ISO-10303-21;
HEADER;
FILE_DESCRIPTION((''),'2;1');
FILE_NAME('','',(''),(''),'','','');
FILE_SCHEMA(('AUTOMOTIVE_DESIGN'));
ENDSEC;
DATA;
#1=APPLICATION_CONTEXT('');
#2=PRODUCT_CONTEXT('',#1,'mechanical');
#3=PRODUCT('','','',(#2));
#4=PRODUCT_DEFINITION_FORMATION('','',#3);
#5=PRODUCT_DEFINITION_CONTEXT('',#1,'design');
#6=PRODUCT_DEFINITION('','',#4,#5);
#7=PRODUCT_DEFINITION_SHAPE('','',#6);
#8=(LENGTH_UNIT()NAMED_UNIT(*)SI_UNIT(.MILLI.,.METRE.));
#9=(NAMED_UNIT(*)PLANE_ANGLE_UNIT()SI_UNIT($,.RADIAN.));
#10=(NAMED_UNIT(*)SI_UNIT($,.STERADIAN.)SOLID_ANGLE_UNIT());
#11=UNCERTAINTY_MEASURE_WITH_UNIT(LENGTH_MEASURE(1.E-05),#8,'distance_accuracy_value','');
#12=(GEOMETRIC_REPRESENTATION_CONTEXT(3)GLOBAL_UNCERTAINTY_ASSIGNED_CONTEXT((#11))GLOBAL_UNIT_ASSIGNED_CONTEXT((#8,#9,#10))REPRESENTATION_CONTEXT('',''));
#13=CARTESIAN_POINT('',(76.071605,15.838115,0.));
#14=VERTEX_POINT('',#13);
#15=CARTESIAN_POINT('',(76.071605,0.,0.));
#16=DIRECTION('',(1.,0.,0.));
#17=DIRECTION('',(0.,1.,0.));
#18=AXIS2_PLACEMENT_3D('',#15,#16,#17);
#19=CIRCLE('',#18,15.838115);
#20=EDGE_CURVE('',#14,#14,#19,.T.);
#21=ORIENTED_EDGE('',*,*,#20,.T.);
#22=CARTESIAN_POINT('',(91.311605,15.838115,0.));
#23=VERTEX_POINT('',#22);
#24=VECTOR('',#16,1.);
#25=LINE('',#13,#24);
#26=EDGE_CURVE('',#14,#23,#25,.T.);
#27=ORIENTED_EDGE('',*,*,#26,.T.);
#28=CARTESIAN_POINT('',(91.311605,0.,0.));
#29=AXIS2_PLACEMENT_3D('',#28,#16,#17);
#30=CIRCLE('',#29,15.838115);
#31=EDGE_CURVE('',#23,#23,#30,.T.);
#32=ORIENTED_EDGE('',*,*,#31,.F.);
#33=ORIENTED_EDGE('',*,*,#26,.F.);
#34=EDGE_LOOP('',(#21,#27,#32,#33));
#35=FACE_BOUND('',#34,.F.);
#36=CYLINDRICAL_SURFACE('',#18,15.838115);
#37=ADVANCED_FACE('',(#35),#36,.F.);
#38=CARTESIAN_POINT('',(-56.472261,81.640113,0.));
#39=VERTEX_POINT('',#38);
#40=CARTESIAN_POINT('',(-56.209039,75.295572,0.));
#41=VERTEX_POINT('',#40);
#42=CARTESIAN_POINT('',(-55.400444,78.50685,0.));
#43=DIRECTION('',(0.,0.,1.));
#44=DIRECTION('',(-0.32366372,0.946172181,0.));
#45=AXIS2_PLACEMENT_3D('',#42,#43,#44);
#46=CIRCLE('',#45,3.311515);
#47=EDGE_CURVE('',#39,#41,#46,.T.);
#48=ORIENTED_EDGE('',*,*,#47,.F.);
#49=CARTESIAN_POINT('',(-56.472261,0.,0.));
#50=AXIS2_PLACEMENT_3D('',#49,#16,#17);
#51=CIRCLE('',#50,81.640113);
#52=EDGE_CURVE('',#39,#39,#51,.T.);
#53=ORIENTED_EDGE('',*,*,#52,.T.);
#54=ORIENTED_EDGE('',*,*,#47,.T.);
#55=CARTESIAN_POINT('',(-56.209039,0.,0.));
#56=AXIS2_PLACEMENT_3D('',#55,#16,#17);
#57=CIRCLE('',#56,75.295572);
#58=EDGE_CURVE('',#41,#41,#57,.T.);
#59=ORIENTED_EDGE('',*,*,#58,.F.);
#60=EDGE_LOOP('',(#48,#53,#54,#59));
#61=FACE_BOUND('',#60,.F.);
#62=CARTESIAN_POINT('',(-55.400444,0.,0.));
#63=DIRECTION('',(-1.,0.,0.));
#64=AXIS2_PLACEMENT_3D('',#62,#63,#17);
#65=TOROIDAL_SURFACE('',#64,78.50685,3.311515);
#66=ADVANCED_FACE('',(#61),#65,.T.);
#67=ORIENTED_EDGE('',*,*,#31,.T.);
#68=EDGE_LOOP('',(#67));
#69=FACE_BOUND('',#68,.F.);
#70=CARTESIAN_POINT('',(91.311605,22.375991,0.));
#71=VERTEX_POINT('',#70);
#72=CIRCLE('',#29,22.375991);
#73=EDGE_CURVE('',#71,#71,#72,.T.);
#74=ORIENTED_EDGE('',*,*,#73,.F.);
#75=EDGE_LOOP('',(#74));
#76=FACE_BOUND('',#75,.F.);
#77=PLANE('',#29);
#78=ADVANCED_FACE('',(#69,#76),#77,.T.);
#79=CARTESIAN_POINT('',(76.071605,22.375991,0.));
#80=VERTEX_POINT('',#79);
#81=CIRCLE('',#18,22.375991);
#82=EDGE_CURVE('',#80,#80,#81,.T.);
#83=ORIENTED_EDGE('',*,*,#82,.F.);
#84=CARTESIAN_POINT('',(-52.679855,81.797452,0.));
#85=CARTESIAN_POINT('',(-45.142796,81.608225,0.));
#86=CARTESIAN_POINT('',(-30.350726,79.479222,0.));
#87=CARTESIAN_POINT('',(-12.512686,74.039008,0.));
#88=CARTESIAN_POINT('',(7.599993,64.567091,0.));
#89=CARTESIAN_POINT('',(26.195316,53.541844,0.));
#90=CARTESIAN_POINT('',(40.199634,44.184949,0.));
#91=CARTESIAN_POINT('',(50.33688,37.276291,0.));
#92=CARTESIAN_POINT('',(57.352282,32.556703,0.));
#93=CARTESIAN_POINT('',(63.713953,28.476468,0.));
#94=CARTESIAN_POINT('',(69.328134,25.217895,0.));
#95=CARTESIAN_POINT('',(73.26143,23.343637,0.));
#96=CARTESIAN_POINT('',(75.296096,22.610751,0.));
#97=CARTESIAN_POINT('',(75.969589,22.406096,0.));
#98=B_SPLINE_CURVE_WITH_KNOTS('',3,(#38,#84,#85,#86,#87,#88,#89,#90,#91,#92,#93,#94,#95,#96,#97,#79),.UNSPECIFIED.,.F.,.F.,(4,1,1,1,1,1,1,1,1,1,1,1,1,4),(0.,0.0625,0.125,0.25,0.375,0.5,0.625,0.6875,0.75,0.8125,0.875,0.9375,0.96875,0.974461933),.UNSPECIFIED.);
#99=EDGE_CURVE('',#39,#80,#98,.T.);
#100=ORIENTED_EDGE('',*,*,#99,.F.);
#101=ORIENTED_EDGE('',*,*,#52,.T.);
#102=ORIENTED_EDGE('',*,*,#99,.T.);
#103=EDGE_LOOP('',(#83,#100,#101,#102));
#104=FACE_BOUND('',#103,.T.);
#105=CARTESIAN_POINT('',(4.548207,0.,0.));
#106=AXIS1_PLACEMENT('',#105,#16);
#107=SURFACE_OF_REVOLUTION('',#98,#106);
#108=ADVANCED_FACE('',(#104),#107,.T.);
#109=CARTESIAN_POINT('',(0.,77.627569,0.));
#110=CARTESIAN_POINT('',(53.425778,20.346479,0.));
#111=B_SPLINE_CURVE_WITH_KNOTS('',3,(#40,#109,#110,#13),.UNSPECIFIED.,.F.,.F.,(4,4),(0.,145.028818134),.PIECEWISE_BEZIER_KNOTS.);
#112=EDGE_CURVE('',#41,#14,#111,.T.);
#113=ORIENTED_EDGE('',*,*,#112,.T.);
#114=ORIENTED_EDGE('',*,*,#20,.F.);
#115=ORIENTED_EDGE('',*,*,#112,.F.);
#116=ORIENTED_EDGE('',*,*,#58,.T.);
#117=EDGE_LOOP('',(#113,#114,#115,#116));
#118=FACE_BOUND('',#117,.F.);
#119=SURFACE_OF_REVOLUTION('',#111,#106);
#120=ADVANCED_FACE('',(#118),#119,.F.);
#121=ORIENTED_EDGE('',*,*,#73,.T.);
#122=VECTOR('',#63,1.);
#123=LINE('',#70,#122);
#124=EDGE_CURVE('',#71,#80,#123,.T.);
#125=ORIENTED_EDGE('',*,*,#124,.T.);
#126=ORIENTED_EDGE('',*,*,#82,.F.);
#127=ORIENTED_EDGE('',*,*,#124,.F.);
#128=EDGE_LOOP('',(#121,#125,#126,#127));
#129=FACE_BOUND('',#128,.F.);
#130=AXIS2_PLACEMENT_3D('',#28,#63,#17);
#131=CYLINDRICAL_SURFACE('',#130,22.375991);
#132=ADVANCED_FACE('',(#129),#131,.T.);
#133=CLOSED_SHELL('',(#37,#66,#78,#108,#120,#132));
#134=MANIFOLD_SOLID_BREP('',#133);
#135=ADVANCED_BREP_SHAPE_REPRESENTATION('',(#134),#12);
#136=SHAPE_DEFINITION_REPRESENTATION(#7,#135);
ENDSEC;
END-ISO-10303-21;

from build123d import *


# Not quite as in the source:
# - ends of sketch curves that miss each other by under 0.0002 mm in the source are joined
# - the dataset's text gives a spline's control points without its knots; the knots are read off the source's solid


with BuildPart() as f1:
    # F0 (on Top) → F1 (revolve)
    with BuildSketch(Plane.XY):
        Polygon((91.3116050863, 22.3759908215), (76.0716050863, 22.3759908215), (76.0716050863, 16.0226677732), (76.0716050863, 15.8381145447), (91.3116050863, 15.8381145447), align=None)
        with BuildLine():
            Line((76.0716050863, 16.0226677732), (76.0716050863, 22.3759908215))
            add(Edge.make_bspline(
                [(-56.4722613609, 81.6401132205), (-52.6798548628, 81.7974523925), (-45.1427955186, 81.6082252704), (-30.3507258747, 79.4792224524), (-12.5126860956, 74.0390077394), (7.5999931638, 64.5670910238), (26.1953157898, 53.5418439599), (40.1996337275, 44.1849486662), (50.3368797082, 37.2762913548), (57.3522822479, 32.5567032312), (63.7139533786, 28.4764684874), (69.3281338193, 25.2178951661), (73.2614295087, 23.3436374263), (75.296096269, 22.6107511928), (75.9695894554, 22.4060960407), (76.0716050863, 22.3759908215)],
                knots=[0, 0, 0, 0, 0.0625, 0.125, 0.25, 0.375, 0.5, 0.625, 0.6875, 0.75, 0.8125, 0.875, 0.9375, 0.96875, 0.974461933, 0.974461933, 0.974461933, 0.974461933], degree=3))
            ThreePointArc((-56.4722613609, 81.6401132205), (-58.7091129412, 78.369579758), (-56.2090393346, 75.2955716118))
            add(Edge.make_bspline(
                [(-56.2090393346, 75.2955716118), (0, 77.627569437), (53.4257777035, 20.3464794904), (76.0716050863, 15.8381145447)],
                knots=[0, 0, 0, 0, 145.0288181338, 145.0288181338, 145.0288181338, 145.0288181338], degree=3))
            Line((76.0716050863, 15.8381145447), (76.0716050863, 16.0226677732))
        make_face()
    revolve(axis=Axis((4.5482069254, 0, 0), (1, 0, 0)))


solid = f1.part
